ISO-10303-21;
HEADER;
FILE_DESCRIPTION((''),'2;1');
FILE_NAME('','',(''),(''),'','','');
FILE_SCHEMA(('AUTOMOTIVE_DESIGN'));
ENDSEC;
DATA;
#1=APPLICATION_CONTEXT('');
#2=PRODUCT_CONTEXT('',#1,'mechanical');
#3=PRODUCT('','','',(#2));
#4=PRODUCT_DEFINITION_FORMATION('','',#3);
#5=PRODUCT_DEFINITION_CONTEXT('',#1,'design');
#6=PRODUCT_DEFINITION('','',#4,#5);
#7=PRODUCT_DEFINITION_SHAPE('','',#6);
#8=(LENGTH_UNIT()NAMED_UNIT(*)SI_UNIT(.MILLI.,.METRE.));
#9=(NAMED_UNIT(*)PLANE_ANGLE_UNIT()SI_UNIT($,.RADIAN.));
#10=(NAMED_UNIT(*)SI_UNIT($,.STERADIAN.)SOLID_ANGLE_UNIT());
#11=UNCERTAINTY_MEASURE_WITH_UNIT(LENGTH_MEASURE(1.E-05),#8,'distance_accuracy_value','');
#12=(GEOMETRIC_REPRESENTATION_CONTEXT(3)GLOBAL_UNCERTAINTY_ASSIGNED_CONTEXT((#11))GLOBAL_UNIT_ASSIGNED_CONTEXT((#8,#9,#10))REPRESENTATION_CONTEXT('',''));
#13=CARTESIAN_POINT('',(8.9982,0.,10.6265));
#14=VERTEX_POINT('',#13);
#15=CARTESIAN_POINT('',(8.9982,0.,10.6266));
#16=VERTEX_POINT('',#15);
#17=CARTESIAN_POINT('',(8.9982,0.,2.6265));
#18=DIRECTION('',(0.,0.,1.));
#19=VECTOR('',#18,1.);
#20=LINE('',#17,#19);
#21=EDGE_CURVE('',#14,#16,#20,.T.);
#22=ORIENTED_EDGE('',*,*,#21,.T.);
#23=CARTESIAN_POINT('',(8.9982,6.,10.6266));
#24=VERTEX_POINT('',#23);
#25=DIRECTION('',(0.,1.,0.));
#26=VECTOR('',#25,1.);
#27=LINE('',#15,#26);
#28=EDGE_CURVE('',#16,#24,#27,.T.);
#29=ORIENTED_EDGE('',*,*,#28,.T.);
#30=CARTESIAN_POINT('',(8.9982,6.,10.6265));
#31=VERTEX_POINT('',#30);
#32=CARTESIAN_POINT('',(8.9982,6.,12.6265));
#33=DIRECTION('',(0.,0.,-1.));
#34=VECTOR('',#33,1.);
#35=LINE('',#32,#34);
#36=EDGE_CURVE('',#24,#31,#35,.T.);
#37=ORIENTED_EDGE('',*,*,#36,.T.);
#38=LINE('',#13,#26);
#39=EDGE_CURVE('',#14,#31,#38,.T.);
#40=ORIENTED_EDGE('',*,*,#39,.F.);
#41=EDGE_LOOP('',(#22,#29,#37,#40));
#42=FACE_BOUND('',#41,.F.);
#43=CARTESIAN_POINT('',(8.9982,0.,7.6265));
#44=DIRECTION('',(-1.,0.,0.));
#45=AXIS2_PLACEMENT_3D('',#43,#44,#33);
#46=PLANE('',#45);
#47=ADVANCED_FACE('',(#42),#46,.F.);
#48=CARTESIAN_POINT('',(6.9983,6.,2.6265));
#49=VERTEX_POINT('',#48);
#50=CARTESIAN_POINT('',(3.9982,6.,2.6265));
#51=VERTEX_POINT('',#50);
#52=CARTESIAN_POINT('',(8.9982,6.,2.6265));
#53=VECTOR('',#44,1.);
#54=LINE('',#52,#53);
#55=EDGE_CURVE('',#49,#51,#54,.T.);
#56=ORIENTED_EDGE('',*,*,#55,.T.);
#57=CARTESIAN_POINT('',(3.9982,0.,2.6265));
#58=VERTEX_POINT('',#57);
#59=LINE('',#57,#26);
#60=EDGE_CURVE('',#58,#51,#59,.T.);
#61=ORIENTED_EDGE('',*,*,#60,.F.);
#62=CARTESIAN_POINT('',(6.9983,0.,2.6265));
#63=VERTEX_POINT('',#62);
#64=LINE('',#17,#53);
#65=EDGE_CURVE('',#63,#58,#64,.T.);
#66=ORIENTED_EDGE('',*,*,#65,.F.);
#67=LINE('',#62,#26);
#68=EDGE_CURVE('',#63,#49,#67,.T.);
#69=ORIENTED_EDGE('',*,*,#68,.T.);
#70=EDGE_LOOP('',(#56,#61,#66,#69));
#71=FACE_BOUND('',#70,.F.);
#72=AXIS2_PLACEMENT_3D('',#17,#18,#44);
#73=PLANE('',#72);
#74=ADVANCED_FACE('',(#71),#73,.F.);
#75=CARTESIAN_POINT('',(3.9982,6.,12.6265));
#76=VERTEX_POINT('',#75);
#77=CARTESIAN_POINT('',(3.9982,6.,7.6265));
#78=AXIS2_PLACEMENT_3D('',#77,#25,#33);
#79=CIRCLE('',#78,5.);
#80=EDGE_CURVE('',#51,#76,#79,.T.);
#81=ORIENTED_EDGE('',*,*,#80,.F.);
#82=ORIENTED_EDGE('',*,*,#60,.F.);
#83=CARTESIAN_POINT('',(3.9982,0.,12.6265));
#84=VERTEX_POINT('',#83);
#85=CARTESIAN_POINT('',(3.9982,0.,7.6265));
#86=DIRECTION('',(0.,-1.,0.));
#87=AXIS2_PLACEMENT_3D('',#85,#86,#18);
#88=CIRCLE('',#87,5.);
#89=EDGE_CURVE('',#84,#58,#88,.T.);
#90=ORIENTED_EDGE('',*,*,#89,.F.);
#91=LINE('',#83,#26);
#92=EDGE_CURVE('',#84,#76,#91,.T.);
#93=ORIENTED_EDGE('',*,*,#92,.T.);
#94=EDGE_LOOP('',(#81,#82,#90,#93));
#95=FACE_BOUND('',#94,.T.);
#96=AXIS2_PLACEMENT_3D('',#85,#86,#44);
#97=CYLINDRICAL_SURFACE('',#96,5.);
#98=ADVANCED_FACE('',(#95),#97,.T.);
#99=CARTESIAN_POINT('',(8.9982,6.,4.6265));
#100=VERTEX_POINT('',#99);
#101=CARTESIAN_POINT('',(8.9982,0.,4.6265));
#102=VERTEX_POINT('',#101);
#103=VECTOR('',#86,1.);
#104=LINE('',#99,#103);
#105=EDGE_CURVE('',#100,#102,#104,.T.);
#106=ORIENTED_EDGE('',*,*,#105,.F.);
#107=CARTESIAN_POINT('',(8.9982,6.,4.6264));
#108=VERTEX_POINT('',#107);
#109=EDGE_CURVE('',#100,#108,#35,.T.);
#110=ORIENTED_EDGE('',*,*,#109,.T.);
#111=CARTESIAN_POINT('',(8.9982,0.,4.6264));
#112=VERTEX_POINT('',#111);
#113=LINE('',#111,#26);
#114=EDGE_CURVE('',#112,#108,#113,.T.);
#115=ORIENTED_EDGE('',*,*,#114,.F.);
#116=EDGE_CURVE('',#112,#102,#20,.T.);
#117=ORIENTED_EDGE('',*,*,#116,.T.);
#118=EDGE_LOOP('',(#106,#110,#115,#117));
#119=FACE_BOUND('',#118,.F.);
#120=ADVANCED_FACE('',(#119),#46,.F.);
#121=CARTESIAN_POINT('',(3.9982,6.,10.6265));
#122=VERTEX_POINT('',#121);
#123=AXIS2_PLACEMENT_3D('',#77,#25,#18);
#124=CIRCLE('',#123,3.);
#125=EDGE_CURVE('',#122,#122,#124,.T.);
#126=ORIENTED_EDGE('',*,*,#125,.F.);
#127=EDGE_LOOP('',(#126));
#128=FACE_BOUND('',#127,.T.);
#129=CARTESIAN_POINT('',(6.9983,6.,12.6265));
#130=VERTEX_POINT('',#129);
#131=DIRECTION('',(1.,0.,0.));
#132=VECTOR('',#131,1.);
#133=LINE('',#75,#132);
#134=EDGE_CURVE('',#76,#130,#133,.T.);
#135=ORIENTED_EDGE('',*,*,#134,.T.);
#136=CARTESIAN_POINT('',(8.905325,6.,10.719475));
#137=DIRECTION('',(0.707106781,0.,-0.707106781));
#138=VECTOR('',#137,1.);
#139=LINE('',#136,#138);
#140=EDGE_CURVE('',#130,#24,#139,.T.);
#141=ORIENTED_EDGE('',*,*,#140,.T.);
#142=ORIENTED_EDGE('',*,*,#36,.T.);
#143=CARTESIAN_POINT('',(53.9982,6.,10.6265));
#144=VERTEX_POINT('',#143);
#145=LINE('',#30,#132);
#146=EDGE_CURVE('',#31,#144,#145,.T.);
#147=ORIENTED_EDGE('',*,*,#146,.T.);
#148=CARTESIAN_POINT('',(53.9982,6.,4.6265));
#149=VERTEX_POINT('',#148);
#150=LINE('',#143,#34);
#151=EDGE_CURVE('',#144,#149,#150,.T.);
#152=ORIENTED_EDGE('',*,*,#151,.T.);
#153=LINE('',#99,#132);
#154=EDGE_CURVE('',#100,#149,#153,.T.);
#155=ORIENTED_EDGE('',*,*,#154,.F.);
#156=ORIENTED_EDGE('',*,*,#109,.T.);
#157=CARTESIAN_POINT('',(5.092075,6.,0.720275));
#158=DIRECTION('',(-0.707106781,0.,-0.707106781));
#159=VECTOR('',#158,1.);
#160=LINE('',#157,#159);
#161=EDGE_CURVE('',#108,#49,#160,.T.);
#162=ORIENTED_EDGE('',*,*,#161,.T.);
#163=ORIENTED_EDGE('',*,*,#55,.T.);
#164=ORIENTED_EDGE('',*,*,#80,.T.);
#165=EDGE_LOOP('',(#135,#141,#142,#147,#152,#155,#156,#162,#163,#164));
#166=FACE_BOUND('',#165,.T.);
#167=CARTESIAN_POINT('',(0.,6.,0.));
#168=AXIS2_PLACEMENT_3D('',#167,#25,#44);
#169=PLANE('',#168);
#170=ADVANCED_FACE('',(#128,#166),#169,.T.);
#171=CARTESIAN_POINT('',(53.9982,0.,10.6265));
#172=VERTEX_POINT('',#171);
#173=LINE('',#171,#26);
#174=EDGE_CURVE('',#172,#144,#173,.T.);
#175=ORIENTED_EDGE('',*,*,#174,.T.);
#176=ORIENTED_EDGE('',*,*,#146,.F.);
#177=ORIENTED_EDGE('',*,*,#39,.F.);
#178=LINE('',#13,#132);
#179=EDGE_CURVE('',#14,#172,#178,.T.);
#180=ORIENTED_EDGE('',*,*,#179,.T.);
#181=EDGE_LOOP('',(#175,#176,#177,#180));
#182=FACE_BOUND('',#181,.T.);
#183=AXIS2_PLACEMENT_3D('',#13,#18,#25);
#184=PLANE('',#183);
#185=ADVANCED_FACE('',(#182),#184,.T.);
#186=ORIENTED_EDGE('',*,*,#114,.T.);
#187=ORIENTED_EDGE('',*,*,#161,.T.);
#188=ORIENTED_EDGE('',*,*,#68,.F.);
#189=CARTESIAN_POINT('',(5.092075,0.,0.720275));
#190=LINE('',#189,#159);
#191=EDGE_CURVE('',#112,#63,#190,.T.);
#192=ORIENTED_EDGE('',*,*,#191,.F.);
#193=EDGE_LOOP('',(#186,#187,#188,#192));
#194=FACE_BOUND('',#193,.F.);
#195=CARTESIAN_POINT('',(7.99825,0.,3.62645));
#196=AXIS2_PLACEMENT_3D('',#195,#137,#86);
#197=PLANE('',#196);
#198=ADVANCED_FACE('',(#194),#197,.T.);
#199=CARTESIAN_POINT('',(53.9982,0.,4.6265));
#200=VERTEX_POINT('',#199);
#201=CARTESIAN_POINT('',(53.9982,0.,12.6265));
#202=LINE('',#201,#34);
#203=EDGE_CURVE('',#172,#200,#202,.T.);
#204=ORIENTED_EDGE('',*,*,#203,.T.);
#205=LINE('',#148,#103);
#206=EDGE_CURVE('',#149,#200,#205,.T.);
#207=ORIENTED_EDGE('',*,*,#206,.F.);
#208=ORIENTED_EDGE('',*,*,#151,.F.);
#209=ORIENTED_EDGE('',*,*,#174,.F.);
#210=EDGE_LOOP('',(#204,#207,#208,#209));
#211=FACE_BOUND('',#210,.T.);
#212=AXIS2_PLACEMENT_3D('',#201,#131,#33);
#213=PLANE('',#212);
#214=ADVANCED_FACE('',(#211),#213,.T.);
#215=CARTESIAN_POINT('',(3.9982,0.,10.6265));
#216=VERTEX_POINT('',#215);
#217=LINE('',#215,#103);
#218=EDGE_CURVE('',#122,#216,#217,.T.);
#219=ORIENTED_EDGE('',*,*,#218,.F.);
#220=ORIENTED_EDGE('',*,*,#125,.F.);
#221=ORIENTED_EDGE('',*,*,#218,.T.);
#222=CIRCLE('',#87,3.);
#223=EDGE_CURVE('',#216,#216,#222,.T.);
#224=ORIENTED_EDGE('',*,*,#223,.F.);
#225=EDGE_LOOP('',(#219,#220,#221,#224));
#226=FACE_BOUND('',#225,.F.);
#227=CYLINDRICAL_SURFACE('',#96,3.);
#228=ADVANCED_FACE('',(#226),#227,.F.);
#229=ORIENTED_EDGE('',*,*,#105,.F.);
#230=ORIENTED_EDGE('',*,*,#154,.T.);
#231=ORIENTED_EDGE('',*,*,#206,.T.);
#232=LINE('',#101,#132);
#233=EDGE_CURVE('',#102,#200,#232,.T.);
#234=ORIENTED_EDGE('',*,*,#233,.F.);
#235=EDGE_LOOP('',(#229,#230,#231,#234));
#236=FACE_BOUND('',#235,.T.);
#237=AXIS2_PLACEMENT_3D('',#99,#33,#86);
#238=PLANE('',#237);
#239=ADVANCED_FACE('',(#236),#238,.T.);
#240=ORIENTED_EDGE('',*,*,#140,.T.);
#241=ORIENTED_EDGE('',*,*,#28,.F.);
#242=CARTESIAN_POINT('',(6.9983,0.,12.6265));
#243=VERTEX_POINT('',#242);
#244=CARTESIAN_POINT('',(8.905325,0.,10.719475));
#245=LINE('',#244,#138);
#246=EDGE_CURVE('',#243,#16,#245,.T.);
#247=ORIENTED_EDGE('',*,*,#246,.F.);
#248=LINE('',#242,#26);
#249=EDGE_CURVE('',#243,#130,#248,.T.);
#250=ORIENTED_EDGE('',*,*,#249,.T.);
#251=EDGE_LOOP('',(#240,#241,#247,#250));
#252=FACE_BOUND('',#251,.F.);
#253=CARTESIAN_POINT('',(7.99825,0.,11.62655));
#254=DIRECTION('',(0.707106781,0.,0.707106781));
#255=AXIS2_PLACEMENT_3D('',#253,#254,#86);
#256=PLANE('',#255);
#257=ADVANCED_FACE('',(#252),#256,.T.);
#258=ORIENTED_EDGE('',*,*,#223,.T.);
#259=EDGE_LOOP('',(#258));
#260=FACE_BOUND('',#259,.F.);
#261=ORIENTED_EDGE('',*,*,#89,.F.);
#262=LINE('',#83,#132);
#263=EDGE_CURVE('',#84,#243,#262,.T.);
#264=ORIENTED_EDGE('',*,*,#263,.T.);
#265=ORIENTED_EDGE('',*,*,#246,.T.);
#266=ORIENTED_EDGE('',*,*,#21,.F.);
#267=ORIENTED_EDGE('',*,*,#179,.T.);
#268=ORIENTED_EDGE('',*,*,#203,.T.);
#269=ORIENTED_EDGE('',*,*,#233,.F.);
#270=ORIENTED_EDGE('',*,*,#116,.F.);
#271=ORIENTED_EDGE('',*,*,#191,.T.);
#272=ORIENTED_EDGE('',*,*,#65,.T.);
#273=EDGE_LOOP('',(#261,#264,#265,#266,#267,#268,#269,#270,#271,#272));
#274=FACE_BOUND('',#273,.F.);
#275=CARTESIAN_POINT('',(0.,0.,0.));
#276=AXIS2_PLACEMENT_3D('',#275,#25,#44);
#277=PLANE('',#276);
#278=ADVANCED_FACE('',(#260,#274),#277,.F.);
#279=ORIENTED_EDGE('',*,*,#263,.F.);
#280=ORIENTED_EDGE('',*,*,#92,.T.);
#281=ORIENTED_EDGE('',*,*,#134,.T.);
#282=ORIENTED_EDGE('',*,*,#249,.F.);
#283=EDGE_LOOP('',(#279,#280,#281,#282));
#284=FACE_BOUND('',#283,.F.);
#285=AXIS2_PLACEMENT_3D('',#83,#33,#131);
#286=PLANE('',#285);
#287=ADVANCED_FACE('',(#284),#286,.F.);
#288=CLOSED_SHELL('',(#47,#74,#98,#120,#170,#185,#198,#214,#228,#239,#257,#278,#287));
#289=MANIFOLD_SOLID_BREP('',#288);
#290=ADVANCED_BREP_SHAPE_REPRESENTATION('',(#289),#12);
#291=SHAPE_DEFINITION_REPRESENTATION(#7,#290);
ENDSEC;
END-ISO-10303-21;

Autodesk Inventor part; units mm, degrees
ref_plane "YZ Plane" through (0, 0, 0) normal (1, 0, 0) x (0, 1, 0)
ref_plane "XZ Plane" through (0, 0, 0) normal (0, 1, 0) x (-1, 0, 0)
ref_plane "XY Plane" through (0, 0, 0) normal (0, 0, 1) x (1, 0, 0)
sketch "Sketch1" plane through (0, 0, 0) normal (0, 1, 0) x (-1, 0, 0)
  circle A0 centre (-3.9982, 7.6265) radius 3
  circle A1 centre (-3.9982, 7.6265) radius 5
  line L0 (-3.9982, 12.6265) -> (-8.9982, 12.6265)
  line L1 (-8.9982, 12.6265) -> (-8.9982, 2.6265)
  line L2 (-8.9982, 2.6265) -> (-3.9982, 2.6265)
  line L3 (-3.9982, 2.6265) -> (-3.9982, 12.6265)
  point P0 (0, 0)
  dimension "d0" = 6
  dimension "d1" = 2
  dimension "d8" = 0
extrude "Extrusion1" add sketch "Sketch1" along normal blind 6 contours A0 L3 A1 | A0 L3 A1
extrude "Extrusion2" add sketch "Sketch1" along normal blind 6 contours L3 A0 | A0 L3 A1 | A1 L1 L0 | L2 L1 A1 picked at (-5.8933, 7.7284) picked at (-4.3691, 3.335)
extrude "Extrusion3" cut sketch "Sketch1" along normal blind 6 contours A0 L3 | L3 A0
sketch "Sketch2" plane through (8.9982, 0, 12.6265) normal (1, 0, 0) x (0, 0, -1)
  line L0 (0, 0) -> (10, 0) projected
  line L1 (2, 6) -> (8, 6)
  line L2 (8, 6) -> (8, 0)
  line L3 (8, 0) -> (2, 0)
  line L4 (2, 0) -> (2, 6)
  line L5 (0, 0) -> (0, 6) projected
  line L6 (10, 0) -> (10, 6) projected
  line L7 (0, 6) -> (10, 6) projected
  point P0 (12.6265, 0)
  dimension "d9" = 2
  dimension "d10" = 2
extrude "Extrusion4" add sketch "Sketch2" along normal blind 45 contours L4 L1 L2 L0
chamfer "Chamfer1" distance 2 angle 45 2 edges at (8.9982, 3, 12.6265) (8.9982, 3, 2.6265)
properties part number "roka1"
